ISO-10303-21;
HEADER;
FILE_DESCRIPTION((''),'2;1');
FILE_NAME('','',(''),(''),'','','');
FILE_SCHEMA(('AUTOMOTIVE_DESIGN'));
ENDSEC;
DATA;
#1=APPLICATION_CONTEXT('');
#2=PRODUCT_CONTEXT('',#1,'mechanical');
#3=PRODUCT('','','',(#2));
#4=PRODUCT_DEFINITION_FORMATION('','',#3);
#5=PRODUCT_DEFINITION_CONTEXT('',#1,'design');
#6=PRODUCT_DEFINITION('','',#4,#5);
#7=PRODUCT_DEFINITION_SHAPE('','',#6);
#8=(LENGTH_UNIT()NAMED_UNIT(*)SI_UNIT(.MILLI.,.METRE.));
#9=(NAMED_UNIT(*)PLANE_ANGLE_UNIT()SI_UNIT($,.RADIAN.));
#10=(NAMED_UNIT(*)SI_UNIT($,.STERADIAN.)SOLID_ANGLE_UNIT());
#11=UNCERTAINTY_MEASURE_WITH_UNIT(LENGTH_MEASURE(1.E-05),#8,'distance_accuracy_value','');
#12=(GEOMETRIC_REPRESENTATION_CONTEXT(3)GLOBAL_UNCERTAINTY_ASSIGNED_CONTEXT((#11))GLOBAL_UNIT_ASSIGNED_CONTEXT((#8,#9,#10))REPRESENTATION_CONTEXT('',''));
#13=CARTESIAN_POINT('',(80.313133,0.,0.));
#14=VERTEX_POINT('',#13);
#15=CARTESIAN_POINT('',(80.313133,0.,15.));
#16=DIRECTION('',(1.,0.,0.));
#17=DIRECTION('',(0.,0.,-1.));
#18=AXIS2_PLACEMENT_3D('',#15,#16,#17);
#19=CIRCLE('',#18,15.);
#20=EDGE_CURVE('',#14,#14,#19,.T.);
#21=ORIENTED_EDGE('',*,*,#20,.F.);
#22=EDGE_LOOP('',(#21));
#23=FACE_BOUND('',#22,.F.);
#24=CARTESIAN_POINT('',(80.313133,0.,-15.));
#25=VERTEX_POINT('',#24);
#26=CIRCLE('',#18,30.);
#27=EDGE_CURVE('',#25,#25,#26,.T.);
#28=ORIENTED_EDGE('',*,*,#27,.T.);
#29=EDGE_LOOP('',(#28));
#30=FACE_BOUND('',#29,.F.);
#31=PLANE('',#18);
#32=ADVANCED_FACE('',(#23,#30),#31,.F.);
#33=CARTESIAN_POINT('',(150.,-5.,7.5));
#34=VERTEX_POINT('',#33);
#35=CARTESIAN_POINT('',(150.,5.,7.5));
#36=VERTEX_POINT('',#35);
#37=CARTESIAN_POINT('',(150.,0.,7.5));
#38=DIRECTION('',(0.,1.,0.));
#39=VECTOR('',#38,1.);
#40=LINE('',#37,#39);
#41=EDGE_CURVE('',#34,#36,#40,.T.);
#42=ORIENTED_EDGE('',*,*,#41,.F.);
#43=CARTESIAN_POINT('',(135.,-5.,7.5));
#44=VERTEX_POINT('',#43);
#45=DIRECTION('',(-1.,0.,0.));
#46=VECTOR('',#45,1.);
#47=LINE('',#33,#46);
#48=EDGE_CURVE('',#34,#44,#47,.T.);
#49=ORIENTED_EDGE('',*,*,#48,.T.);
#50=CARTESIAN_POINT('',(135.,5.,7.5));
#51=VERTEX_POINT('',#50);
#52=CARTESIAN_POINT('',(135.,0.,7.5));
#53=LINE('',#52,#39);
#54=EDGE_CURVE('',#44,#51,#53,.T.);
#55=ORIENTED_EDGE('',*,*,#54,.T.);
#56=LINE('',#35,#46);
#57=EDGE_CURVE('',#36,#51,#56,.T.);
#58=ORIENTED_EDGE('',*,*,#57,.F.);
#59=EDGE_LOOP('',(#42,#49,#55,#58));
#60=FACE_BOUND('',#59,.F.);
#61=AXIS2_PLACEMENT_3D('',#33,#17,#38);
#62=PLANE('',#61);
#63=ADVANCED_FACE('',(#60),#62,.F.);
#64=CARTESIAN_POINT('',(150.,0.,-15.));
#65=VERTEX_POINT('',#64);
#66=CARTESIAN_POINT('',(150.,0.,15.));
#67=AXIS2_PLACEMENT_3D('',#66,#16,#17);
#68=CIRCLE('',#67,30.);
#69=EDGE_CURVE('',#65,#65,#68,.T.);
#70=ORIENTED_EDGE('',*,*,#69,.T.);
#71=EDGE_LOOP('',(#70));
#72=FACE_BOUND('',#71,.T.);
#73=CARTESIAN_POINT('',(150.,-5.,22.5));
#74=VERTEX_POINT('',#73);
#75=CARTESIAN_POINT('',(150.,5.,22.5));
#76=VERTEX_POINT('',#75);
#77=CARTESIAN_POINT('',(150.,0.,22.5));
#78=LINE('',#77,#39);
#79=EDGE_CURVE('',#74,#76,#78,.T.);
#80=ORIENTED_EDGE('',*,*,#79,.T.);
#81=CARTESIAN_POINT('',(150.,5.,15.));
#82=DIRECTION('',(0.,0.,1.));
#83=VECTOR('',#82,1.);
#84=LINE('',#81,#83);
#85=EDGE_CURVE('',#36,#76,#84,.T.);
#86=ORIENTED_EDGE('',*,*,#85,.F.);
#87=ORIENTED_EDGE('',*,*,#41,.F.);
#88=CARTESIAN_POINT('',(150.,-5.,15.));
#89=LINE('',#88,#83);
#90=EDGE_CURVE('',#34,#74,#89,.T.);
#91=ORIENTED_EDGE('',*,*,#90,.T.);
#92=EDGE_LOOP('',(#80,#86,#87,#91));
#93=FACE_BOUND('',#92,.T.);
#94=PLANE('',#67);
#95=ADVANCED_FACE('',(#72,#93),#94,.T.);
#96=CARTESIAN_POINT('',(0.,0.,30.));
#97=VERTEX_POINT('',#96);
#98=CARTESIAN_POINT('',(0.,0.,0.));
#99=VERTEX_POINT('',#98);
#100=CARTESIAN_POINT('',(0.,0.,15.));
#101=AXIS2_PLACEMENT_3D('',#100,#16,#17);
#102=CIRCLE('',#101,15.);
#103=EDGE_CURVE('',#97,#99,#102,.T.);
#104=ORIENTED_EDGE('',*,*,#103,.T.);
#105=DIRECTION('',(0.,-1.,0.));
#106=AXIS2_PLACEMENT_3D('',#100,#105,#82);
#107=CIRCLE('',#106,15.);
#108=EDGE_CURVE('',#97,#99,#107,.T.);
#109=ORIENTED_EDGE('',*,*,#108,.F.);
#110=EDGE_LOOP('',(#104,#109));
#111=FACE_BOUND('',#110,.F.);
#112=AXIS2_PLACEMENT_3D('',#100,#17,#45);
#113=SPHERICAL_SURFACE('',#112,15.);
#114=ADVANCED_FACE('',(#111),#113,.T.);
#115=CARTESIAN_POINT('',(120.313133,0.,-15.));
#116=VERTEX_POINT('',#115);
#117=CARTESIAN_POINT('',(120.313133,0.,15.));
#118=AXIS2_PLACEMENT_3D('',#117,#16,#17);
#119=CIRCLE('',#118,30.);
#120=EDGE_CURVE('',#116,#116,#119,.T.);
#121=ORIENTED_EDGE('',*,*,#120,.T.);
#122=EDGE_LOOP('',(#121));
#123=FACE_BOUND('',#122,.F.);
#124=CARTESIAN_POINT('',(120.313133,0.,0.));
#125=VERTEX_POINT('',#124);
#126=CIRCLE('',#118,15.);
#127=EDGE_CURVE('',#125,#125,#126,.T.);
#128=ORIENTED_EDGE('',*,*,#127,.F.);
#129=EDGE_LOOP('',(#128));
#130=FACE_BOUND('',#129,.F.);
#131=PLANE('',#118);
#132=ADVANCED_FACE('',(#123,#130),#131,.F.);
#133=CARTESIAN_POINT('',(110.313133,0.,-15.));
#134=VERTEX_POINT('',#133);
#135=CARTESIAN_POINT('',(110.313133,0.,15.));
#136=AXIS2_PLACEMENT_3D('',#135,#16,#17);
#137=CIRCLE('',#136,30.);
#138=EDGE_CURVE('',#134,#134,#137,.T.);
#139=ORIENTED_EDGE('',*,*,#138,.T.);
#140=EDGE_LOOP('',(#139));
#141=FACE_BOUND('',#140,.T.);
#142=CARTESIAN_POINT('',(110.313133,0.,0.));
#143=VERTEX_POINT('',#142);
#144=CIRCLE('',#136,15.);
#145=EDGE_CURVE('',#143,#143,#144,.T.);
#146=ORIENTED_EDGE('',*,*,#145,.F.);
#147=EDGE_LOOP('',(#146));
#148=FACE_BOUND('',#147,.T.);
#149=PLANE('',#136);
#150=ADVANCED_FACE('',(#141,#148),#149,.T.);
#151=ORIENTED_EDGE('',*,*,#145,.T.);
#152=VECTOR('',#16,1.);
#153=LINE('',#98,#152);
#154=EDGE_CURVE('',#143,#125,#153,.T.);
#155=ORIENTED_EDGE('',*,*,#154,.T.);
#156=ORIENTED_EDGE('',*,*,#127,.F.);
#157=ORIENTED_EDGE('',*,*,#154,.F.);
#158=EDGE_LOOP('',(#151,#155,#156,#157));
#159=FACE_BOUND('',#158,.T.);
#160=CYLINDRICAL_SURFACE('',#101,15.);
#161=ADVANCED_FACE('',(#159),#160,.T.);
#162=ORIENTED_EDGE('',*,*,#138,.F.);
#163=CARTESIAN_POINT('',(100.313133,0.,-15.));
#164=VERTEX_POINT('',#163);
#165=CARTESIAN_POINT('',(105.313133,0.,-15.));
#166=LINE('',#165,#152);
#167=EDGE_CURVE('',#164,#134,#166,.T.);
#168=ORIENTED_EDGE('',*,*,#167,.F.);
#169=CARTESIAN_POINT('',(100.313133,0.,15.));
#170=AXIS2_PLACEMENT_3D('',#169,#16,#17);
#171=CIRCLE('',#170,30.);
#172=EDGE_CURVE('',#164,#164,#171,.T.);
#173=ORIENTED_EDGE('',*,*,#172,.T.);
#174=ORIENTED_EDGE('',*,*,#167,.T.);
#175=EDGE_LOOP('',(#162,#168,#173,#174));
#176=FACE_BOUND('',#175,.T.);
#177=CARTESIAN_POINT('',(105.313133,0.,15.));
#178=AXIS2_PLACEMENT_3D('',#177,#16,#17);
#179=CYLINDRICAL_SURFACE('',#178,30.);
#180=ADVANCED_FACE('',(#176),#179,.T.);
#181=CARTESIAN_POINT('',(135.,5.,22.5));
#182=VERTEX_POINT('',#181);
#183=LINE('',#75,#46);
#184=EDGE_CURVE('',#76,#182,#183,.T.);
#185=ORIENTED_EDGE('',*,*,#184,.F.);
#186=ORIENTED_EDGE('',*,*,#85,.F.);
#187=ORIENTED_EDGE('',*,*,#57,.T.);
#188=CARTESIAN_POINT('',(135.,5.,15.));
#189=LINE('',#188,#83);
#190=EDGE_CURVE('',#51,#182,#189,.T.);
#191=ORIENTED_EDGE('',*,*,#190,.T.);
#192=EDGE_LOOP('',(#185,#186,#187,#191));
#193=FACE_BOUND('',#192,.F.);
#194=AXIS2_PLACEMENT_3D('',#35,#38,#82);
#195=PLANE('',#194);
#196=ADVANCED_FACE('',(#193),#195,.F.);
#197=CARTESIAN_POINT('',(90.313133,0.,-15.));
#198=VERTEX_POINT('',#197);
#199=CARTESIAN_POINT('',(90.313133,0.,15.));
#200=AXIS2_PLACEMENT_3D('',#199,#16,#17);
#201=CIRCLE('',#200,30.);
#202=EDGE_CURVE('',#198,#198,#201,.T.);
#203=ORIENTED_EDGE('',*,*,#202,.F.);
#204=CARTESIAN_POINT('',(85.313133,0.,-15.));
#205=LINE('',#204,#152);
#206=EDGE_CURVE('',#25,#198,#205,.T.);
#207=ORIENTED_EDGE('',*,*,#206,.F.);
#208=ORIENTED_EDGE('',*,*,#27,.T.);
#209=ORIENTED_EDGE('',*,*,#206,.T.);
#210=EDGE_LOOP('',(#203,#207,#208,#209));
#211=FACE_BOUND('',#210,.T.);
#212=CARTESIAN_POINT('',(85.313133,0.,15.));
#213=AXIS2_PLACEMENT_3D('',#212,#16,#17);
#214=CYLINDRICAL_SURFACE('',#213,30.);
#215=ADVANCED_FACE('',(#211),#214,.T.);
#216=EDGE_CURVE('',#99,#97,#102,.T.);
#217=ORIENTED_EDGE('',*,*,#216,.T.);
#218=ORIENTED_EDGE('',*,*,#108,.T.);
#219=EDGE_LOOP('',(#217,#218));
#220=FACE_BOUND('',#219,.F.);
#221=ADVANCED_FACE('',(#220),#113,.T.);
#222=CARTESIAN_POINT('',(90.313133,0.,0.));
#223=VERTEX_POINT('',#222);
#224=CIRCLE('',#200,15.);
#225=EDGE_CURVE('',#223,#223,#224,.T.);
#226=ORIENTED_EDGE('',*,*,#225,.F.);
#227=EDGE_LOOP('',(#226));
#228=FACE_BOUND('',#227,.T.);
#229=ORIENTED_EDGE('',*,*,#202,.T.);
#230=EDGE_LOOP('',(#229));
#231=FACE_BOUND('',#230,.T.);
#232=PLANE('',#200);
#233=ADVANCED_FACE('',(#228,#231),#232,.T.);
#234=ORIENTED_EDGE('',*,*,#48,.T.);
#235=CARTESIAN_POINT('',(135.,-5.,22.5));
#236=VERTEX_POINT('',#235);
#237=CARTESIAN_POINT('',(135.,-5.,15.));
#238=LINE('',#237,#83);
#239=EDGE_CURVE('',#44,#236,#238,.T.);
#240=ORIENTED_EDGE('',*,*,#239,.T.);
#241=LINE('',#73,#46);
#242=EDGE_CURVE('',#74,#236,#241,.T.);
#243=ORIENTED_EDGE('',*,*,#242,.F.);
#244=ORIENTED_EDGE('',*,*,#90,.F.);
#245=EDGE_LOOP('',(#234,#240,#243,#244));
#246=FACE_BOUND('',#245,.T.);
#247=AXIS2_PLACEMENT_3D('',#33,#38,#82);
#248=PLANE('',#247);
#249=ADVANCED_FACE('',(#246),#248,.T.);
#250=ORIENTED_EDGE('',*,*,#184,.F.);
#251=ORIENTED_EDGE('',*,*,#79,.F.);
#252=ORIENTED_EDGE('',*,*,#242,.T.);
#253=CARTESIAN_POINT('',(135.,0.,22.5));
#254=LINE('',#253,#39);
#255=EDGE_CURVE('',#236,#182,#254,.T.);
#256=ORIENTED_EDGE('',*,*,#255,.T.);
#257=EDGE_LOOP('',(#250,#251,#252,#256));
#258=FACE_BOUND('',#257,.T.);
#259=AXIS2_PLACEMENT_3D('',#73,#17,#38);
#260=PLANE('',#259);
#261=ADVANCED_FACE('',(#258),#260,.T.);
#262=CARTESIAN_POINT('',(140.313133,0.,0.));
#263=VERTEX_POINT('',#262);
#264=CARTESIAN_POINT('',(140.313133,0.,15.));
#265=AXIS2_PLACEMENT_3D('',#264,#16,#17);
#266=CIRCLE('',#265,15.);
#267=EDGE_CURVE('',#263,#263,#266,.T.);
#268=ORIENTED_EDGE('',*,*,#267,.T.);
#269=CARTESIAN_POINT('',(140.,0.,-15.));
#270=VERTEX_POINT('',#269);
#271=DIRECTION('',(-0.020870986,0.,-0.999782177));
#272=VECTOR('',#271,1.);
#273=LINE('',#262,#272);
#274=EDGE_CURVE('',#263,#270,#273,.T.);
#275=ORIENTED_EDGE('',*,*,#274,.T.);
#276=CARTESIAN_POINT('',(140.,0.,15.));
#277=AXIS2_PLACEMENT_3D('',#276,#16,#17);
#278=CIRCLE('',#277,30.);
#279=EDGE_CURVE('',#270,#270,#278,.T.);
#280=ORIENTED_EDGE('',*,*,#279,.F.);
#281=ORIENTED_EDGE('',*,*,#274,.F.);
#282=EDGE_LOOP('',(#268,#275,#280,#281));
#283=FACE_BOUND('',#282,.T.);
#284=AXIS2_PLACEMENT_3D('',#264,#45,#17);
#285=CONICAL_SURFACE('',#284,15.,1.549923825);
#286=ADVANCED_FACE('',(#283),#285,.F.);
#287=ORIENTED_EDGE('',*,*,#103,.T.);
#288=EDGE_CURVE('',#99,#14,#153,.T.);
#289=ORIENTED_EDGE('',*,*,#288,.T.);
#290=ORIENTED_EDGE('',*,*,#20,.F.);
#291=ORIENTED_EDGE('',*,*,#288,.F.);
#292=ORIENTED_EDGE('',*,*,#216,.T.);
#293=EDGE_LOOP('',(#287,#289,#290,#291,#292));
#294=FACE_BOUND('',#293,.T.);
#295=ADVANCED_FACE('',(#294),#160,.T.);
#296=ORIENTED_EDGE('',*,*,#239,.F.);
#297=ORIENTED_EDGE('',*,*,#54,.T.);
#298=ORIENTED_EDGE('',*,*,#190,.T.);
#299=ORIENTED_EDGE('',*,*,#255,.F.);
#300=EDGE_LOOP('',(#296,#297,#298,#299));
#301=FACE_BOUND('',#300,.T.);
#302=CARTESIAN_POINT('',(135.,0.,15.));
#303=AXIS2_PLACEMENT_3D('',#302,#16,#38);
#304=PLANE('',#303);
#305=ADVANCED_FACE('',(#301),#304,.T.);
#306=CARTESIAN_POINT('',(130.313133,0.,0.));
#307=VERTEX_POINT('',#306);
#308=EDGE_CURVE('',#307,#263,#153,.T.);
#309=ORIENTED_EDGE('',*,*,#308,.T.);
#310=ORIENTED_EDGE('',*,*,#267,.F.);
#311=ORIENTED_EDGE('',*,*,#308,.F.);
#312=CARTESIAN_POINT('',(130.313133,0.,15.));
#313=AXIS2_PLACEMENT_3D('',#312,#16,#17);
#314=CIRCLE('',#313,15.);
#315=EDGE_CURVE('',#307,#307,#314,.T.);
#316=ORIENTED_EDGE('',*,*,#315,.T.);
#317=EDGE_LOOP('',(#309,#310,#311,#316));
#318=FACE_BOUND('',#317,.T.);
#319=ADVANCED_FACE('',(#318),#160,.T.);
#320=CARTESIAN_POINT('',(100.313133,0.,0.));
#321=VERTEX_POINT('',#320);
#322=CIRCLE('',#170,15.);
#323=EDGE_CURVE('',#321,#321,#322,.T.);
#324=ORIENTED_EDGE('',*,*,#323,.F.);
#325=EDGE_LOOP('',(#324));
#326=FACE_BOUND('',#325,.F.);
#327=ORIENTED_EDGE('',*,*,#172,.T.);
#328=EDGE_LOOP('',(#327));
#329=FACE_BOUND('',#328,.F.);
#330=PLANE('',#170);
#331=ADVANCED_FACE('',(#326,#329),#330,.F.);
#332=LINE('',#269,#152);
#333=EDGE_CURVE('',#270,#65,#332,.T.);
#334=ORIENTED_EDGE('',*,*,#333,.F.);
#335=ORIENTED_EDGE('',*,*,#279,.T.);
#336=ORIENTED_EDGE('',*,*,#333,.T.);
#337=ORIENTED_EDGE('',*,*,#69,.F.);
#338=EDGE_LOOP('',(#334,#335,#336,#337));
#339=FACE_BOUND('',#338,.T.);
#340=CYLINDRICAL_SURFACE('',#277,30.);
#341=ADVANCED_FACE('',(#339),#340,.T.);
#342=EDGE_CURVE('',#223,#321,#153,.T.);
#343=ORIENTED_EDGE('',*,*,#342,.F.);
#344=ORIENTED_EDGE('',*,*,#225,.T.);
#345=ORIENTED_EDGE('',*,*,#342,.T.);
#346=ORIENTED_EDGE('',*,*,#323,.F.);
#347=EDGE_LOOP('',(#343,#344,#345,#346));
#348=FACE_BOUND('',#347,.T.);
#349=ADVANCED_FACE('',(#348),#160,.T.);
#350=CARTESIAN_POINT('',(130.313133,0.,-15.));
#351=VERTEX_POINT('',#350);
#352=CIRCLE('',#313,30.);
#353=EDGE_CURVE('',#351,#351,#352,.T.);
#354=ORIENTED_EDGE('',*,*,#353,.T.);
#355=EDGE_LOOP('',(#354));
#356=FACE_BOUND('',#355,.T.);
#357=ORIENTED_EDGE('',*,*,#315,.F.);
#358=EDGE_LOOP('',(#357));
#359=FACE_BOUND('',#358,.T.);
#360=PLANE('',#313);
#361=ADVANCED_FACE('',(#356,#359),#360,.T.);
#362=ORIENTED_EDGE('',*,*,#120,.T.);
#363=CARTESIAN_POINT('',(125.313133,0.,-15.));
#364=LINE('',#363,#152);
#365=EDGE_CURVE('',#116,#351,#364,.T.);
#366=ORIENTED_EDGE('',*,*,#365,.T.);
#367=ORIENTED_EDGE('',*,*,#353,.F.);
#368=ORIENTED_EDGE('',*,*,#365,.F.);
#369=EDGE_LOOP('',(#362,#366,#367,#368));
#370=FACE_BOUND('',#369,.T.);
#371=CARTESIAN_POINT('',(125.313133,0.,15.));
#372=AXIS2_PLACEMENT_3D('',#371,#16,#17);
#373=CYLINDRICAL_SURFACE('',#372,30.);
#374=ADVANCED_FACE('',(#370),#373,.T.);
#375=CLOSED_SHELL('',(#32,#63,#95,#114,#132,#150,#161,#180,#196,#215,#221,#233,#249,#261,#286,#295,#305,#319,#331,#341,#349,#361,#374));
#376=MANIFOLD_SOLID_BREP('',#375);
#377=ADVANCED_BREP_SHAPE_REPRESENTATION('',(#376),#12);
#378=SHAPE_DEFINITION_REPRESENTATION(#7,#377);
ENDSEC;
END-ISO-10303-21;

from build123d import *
from build123d import SkipClean  # not in build123d's __all__

# Parameters (mm, degrees)
F1_W     = 10
F1_H     = 15
F3_W     = 10
F3_H     = 15
F5_DEPTH = 15


with BuildPart() as f2:
    # F1 (on Front) → F2 (revolve)
    with BuildSketch(Plane.XZ):
        Polygon((150, -15), (150, 0), (140.3131330013, 0), (140, -15), align=None)
        Polygon((138.0902081728, 15), (0, 15), (0, 0), (80.3131330013, 0), (90.3131330013, 0), (100.3131330013, 0), (110.3131330013, 0), (120.3131330013, 0), (130.3131330013, 0), (140.3131330013, 0), (150, 0), (150, 15), align=None)
        with Locations((125.3131330013, -7.5)):
            Rectangle(F1_W, F1_H)
        with Locations((105.3131330013, -7.5)):
            Rectangle(F1_W, F1_H)
        with Locations((85.3131330013, -7.5)):
            Rectangle(F1_W, F1_H)
    revolve(axis=Axis((75, 0, 15), (1, 0, 0)))

    # F0 (on Front) → F4 (revolve)
    with BuildSketch(Plane.XZ):
        with BuildLine():
            ThreePointArc((0, 30), (-15, 15), (0, 0))
            Line((0, 0), (0, 30))
        make_face()
    with SkipClean():  # cleaning this boolean's faces spoils the solid; the shape is the same uncleaned
        revolve(axis=Axis((0, 0, 15), (0, 0, 1)))

    # F3 (on face) → F5 (cut)
    with BuildSketch(Plane.YZ.offset(150)):
        with Locations((0, 15)):
            Rectangle(F3_W, F3_H)
    with SkipClean():  # cleaning this boolean's faces spoils the solid; the shape is the same uncleaned
        extrude(amount=-F5_DEPTH, mode=Mode.SUBTRACT)


solid = f2.part
